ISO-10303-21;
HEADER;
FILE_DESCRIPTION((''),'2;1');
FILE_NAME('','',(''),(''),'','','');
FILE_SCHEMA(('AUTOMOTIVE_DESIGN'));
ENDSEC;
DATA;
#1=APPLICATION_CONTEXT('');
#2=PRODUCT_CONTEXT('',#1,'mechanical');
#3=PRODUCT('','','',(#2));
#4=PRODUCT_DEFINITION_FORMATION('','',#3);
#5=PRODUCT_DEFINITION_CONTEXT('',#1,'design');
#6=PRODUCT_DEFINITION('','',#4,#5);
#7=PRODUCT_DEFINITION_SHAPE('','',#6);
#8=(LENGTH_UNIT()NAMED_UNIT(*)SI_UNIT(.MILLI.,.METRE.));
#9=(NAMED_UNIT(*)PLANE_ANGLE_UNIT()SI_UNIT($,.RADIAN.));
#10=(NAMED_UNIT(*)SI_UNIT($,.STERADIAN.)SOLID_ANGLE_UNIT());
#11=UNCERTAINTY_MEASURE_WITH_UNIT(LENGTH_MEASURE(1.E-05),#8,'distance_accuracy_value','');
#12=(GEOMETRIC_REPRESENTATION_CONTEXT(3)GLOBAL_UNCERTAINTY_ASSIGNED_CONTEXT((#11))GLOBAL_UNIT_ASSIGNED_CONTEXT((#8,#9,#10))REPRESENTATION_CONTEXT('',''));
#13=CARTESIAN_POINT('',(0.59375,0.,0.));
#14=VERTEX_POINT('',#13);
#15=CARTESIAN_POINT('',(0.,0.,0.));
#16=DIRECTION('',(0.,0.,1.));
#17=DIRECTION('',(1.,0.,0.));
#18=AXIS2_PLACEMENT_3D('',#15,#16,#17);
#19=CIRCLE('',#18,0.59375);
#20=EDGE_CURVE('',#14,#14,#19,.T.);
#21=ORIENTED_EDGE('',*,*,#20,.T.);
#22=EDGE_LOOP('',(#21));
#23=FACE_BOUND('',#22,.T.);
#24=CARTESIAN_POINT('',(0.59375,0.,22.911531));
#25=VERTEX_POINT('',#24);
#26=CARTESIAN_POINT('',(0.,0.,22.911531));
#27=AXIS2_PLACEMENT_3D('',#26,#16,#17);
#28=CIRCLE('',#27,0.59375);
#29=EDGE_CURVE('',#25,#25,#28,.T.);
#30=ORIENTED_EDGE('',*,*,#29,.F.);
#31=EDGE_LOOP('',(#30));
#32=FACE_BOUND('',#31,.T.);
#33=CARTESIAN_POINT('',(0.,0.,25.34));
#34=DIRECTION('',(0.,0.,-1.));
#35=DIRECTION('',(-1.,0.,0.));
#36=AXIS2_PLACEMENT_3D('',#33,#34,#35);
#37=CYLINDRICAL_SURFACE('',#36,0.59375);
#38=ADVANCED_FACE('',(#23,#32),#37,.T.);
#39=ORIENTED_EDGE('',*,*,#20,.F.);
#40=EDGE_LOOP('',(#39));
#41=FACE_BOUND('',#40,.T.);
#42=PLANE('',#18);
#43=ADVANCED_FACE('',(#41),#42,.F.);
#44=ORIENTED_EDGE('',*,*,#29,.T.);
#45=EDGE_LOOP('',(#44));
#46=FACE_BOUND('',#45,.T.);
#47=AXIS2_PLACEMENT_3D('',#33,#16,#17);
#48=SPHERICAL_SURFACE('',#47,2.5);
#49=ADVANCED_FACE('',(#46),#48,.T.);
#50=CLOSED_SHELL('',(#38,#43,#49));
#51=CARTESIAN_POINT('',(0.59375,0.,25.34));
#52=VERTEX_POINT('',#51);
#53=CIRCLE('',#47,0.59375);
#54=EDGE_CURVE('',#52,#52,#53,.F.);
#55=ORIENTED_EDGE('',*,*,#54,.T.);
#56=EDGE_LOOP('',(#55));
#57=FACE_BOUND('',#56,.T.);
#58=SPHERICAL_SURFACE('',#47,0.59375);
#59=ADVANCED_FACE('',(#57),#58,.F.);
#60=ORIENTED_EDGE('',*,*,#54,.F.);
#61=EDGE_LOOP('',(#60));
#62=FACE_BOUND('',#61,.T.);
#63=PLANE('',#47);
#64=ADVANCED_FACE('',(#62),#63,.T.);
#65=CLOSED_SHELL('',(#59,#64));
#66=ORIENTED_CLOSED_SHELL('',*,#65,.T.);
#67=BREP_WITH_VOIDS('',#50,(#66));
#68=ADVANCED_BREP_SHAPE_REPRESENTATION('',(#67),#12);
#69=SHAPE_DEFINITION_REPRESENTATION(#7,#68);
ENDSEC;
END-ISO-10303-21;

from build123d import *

# Parameters (mm, degrees)
SKETCH1_R           = 0.59375
BOSS_EXTRUDE1_DEPTH = 25.34


with BuildPart() as part:
    # Sketch1 → Boss-Extrude1 (new body)
    with BuildSketch(Plane.XY):
        Circle(SKETCH1_R)
    extrude(amount=BOSS_EXTRUDE1_DEPTH)

    # Sketch2 → Revolve1 (revolve)
    with BuildSketch(Plane.XY.offset(25.34)):
        with BuildLine():
            ThreePointArc((0, 2.5), (-2.5, 0), (0, -2.5))
            Line((0, -2.5), (0, -0.59375))
            ThreePointArc((0, -0.59375), (-0.59375, 0), (0, 0.59375))
            Line((0, 0.59375), (0, 2.5))
        make_face()
    revolve(axis=Axis((0, -2.5, 25.34), (0, 1, 0)))


solid = part.part
